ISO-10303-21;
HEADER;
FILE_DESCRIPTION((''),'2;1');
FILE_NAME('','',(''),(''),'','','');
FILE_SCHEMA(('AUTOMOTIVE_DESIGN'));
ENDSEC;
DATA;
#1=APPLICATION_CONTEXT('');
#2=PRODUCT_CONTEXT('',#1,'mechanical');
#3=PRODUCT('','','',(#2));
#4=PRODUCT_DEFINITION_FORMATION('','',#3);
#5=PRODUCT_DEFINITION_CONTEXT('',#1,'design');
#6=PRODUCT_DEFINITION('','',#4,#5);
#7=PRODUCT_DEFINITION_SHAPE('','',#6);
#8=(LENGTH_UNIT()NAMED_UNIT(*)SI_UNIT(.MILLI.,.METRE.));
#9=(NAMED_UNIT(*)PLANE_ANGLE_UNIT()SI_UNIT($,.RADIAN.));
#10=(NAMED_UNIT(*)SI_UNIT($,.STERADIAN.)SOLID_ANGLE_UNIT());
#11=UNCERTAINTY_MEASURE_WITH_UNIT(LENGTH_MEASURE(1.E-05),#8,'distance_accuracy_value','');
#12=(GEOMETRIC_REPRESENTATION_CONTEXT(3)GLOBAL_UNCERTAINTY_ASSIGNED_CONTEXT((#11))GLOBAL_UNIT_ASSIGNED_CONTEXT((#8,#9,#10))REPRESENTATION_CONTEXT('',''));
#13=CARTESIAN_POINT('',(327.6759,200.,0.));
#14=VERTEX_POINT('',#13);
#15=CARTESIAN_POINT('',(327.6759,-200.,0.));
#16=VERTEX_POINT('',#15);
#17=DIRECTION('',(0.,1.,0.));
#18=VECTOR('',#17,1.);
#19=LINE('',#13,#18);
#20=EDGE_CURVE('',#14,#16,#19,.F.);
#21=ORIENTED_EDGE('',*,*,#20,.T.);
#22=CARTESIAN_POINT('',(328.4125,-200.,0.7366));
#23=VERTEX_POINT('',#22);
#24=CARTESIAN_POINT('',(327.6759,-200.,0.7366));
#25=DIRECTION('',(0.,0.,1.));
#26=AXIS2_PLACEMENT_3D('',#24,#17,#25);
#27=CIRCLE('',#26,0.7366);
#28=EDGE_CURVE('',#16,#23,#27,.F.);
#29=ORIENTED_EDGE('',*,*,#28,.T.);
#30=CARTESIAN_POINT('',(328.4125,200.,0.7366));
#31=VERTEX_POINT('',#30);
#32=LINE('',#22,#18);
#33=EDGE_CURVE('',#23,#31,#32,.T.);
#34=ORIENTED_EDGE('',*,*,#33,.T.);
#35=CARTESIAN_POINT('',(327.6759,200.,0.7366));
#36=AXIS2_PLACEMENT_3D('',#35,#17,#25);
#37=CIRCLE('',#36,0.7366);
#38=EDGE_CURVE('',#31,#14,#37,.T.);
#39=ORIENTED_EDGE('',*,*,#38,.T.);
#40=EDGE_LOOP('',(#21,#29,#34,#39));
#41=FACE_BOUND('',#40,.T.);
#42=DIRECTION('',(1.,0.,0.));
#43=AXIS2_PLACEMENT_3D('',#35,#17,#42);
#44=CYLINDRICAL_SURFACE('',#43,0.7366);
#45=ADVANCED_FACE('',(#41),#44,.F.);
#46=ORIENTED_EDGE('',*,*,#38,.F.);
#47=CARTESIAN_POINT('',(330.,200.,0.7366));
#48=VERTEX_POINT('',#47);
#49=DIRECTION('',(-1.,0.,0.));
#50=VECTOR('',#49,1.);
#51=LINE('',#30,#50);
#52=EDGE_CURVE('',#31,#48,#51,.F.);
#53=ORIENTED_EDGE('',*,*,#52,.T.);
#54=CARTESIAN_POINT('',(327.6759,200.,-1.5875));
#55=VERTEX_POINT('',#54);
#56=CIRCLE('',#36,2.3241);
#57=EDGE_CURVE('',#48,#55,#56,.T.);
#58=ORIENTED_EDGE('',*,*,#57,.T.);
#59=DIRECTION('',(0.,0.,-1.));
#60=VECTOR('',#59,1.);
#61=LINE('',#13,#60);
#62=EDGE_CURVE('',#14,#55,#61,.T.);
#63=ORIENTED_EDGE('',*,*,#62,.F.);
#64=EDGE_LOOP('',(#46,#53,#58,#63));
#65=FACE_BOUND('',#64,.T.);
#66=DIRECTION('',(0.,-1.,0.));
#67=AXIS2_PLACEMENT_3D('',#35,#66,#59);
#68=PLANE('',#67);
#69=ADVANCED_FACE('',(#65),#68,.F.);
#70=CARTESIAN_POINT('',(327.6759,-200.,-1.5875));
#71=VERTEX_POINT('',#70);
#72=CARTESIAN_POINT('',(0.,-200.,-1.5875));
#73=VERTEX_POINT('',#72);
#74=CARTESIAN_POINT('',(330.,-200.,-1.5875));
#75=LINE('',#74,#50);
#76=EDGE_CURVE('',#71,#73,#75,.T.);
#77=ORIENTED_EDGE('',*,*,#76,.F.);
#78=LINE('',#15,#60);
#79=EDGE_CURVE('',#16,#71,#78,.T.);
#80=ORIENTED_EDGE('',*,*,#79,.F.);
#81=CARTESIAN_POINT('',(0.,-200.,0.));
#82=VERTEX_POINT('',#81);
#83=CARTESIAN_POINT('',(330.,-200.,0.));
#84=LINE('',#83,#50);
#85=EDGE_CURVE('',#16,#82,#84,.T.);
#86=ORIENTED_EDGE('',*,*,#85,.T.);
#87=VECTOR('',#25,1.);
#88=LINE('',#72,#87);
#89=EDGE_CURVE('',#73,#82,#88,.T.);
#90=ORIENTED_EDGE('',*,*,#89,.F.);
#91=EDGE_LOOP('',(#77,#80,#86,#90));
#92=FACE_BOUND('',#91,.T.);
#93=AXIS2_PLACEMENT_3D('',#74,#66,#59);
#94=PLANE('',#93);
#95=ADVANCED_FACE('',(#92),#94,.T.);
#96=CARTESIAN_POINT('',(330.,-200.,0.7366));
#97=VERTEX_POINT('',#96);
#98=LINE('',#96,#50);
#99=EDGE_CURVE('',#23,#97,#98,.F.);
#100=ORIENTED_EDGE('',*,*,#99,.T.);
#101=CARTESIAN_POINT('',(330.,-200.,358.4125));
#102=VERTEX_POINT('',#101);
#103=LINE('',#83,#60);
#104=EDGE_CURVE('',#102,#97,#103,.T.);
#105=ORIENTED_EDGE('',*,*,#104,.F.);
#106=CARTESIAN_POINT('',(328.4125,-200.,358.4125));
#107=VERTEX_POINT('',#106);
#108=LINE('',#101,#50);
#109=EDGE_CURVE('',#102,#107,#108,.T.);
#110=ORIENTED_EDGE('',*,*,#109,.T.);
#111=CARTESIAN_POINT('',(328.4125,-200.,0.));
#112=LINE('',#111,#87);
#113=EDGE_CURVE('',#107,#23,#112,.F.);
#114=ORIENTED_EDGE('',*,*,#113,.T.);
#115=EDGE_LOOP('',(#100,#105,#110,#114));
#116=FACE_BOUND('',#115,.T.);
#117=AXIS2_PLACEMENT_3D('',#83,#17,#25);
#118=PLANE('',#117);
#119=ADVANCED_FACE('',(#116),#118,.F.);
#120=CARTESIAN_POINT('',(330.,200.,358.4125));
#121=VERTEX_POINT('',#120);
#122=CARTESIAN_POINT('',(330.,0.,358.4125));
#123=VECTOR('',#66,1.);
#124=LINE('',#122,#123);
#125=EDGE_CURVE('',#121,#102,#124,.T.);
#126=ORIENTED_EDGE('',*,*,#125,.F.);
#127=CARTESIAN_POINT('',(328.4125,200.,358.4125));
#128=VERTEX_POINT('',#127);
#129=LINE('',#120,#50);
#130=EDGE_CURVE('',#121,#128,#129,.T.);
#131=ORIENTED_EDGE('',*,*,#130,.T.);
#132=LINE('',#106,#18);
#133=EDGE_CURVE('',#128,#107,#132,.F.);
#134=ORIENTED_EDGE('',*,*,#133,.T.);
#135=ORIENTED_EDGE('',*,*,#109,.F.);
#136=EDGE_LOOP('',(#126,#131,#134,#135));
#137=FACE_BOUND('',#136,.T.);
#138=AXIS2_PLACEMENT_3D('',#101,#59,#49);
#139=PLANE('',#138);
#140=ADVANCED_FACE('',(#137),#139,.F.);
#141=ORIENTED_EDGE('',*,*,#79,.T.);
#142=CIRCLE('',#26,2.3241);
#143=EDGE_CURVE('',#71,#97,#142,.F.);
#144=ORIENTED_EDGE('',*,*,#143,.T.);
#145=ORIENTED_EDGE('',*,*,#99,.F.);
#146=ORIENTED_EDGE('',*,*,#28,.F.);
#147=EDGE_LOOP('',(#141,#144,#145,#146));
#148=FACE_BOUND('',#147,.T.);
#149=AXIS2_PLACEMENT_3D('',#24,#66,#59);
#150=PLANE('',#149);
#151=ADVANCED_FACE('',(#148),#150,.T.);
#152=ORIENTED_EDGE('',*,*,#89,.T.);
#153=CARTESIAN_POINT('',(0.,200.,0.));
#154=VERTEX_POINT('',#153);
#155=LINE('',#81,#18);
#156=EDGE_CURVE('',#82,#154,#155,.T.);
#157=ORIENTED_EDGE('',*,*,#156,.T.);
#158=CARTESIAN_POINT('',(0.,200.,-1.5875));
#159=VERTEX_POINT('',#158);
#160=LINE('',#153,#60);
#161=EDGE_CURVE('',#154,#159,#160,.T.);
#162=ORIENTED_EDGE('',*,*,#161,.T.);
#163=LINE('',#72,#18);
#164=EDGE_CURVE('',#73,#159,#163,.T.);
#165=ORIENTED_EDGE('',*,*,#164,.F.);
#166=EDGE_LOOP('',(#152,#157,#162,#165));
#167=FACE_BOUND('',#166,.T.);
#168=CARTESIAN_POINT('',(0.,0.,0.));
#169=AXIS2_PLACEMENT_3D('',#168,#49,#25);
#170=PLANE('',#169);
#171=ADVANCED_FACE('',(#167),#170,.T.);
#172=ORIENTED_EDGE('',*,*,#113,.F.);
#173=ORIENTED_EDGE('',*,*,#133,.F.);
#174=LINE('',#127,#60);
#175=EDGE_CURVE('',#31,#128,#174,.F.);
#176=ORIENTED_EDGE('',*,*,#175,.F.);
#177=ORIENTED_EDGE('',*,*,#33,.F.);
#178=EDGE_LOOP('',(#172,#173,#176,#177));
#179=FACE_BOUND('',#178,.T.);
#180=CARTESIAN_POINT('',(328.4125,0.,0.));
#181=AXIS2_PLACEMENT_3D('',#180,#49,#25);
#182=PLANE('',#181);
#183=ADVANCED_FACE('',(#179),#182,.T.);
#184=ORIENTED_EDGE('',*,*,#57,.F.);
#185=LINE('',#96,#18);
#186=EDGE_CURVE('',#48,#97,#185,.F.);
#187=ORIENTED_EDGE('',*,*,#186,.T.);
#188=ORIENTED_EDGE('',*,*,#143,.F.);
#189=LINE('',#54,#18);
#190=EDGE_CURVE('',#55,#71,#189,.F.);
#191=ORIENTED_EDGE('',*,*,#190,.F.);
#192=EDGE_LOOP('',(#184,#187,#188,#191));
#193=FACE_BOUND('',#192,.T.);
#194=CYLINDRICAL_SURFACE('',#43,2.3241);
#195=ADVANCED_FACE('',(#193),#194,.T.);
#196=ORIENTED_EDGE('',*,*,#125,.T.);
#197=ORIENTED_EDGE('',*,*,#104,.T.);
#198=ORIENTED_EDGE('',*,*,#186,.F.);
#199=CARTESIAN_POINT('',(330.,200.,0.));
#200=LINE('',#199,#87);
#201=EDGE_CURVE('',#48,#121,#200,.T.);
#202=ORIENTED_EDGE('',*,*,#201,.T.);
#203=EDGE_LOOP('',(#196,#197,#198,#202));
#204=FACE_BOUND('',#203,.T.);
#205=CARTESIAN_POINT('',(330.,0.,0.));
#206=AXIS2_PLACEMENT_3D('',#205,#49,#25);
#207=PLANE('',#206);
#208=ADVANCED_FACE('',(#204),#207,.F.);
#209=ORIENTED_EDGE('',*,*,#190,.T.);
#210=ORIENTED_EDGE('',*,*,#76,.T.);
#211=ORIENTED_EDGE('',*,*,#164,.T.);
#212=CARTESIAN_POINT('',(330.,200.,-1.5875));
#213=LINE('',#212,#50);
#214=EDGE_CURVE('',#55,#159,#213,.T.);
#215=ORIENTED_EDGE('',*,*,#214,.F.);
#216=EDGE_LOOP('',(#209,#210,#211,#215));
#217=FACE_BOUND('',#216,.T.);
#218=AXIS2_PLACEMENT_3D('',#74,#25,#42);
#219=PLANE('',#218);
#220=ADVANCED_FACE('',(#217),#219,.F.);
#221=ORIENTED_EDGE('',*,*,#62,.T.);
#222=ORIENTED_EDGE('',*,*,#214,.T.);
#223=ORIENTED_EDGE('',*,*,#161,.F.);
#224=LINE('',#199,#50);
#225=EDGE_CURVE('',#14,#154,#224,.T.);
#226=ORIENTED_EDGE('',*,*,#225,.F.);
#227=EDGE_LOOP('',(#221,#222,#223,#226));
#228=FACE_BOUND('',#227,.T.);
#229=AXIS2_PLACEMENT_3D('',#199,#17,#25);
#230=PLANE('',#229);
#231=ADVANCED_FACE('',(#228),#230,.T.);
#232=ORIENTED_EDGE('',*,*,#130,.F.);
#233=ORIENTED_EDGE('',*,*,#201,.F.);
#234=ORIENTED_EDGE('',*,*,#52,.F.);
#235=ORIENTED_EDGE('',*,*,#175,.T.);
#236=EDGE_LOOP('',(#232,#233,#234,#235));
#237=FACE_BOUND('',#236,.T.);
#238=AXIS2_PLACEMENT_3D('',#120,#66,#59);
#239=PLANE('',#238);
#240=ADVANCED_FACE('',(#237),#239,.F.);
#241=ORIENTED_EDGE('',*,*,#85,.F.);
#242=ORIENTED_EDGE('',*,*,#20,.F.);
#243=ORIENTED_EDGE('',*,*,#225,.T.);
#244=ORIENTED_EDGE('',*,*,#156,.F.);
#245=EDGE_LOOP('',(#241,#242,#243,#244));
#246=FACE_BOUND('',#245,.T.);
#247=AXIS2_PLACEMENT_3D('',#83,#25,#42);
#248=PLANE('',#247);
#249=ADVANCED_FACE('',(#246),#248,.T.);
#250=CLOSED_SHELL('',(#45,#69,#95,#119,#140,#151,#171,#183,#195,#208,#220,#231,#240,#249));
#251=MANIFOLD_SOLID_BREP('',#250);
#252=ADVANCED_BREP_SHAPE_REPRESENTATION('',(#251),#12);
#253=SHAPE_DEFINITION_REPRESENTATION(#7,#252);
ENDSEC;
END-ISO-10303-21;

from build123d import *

# Parameters (mm, degrees)
SKETCH1_W                    = 1.5875
SKETCH1_H                    = 400
BASE_FLANGE1_DEPTH           = 330
EDGE_FLANGE1_STRIP_W         = 7.8232
EDGE_FLANGE1_STRIP_H         = 1.5875
EDGE_FLANGE1_STRIP_CUT_DEPTH = 400
EDGE_FLANGE1_DEPTH           = 400


# Sheet-metal steps are written as plain solids
with BuildPart() as part:
    # Sketch1 → Base-Flange1 (new body)
    with BuildSketch(Plane(origin=(0, 0, 0), x_dir=(0, 0, -1), z_dir=(1, 0, 0))):
        with Locations((0.79375, 0)):
            Rectangle(SKETCH1_W, SKETCH1_H)
    extrude(amount=BASE_FLANGE1_DEPTH)

    # Edge-Flange1 strip (across the edge) → Edge-Flange1 strip cut (cut)
    with BuildSketch(Plane(origin=(330, -200, 0), x_dir=(-1, 0, 0), z_dir=(0, 1, 0))):
        with Locations((-1.5875, -0.79375)):
            Rectangle(EDGE_FLANGE1_STRIP_W, EDGE_FLANGE1_STRIP_H)
    extrude(amount=EDGE_FLANGE1_STRIP_CUT_DEPTH, mode=Mode.SUBTRACT)

    # Edge-Flange1 section (across the edge) → Edge-Flange1 (add)
    with BuildSketch(Plane(origin=(330, -200, 0), x_dir=(-1, 0, 0), z_dir=(0, 1, 0))):
        with BuildLine():
            Line((0, 0.7366), (0, 358.4125))
            Line((0, 358.4125), (1.5875, 358.4125))
            Line((1.5875, 358.4125), (1.5875, 0.7366))
            ThreePointArc((1.5875, 0.7366), (1.803245145, 0.215745145), (2.3241, 0))
            Line((2.3241, 0), (2.3241, -1.5875))
            ThreePointArc((2.3241, -1.5875), (0.68071313, -0.90678687), (0, 0.7366))
        make_face()
    extrude(amount=EDGE_FLANGE1_DEPTH)


solid = part.part
